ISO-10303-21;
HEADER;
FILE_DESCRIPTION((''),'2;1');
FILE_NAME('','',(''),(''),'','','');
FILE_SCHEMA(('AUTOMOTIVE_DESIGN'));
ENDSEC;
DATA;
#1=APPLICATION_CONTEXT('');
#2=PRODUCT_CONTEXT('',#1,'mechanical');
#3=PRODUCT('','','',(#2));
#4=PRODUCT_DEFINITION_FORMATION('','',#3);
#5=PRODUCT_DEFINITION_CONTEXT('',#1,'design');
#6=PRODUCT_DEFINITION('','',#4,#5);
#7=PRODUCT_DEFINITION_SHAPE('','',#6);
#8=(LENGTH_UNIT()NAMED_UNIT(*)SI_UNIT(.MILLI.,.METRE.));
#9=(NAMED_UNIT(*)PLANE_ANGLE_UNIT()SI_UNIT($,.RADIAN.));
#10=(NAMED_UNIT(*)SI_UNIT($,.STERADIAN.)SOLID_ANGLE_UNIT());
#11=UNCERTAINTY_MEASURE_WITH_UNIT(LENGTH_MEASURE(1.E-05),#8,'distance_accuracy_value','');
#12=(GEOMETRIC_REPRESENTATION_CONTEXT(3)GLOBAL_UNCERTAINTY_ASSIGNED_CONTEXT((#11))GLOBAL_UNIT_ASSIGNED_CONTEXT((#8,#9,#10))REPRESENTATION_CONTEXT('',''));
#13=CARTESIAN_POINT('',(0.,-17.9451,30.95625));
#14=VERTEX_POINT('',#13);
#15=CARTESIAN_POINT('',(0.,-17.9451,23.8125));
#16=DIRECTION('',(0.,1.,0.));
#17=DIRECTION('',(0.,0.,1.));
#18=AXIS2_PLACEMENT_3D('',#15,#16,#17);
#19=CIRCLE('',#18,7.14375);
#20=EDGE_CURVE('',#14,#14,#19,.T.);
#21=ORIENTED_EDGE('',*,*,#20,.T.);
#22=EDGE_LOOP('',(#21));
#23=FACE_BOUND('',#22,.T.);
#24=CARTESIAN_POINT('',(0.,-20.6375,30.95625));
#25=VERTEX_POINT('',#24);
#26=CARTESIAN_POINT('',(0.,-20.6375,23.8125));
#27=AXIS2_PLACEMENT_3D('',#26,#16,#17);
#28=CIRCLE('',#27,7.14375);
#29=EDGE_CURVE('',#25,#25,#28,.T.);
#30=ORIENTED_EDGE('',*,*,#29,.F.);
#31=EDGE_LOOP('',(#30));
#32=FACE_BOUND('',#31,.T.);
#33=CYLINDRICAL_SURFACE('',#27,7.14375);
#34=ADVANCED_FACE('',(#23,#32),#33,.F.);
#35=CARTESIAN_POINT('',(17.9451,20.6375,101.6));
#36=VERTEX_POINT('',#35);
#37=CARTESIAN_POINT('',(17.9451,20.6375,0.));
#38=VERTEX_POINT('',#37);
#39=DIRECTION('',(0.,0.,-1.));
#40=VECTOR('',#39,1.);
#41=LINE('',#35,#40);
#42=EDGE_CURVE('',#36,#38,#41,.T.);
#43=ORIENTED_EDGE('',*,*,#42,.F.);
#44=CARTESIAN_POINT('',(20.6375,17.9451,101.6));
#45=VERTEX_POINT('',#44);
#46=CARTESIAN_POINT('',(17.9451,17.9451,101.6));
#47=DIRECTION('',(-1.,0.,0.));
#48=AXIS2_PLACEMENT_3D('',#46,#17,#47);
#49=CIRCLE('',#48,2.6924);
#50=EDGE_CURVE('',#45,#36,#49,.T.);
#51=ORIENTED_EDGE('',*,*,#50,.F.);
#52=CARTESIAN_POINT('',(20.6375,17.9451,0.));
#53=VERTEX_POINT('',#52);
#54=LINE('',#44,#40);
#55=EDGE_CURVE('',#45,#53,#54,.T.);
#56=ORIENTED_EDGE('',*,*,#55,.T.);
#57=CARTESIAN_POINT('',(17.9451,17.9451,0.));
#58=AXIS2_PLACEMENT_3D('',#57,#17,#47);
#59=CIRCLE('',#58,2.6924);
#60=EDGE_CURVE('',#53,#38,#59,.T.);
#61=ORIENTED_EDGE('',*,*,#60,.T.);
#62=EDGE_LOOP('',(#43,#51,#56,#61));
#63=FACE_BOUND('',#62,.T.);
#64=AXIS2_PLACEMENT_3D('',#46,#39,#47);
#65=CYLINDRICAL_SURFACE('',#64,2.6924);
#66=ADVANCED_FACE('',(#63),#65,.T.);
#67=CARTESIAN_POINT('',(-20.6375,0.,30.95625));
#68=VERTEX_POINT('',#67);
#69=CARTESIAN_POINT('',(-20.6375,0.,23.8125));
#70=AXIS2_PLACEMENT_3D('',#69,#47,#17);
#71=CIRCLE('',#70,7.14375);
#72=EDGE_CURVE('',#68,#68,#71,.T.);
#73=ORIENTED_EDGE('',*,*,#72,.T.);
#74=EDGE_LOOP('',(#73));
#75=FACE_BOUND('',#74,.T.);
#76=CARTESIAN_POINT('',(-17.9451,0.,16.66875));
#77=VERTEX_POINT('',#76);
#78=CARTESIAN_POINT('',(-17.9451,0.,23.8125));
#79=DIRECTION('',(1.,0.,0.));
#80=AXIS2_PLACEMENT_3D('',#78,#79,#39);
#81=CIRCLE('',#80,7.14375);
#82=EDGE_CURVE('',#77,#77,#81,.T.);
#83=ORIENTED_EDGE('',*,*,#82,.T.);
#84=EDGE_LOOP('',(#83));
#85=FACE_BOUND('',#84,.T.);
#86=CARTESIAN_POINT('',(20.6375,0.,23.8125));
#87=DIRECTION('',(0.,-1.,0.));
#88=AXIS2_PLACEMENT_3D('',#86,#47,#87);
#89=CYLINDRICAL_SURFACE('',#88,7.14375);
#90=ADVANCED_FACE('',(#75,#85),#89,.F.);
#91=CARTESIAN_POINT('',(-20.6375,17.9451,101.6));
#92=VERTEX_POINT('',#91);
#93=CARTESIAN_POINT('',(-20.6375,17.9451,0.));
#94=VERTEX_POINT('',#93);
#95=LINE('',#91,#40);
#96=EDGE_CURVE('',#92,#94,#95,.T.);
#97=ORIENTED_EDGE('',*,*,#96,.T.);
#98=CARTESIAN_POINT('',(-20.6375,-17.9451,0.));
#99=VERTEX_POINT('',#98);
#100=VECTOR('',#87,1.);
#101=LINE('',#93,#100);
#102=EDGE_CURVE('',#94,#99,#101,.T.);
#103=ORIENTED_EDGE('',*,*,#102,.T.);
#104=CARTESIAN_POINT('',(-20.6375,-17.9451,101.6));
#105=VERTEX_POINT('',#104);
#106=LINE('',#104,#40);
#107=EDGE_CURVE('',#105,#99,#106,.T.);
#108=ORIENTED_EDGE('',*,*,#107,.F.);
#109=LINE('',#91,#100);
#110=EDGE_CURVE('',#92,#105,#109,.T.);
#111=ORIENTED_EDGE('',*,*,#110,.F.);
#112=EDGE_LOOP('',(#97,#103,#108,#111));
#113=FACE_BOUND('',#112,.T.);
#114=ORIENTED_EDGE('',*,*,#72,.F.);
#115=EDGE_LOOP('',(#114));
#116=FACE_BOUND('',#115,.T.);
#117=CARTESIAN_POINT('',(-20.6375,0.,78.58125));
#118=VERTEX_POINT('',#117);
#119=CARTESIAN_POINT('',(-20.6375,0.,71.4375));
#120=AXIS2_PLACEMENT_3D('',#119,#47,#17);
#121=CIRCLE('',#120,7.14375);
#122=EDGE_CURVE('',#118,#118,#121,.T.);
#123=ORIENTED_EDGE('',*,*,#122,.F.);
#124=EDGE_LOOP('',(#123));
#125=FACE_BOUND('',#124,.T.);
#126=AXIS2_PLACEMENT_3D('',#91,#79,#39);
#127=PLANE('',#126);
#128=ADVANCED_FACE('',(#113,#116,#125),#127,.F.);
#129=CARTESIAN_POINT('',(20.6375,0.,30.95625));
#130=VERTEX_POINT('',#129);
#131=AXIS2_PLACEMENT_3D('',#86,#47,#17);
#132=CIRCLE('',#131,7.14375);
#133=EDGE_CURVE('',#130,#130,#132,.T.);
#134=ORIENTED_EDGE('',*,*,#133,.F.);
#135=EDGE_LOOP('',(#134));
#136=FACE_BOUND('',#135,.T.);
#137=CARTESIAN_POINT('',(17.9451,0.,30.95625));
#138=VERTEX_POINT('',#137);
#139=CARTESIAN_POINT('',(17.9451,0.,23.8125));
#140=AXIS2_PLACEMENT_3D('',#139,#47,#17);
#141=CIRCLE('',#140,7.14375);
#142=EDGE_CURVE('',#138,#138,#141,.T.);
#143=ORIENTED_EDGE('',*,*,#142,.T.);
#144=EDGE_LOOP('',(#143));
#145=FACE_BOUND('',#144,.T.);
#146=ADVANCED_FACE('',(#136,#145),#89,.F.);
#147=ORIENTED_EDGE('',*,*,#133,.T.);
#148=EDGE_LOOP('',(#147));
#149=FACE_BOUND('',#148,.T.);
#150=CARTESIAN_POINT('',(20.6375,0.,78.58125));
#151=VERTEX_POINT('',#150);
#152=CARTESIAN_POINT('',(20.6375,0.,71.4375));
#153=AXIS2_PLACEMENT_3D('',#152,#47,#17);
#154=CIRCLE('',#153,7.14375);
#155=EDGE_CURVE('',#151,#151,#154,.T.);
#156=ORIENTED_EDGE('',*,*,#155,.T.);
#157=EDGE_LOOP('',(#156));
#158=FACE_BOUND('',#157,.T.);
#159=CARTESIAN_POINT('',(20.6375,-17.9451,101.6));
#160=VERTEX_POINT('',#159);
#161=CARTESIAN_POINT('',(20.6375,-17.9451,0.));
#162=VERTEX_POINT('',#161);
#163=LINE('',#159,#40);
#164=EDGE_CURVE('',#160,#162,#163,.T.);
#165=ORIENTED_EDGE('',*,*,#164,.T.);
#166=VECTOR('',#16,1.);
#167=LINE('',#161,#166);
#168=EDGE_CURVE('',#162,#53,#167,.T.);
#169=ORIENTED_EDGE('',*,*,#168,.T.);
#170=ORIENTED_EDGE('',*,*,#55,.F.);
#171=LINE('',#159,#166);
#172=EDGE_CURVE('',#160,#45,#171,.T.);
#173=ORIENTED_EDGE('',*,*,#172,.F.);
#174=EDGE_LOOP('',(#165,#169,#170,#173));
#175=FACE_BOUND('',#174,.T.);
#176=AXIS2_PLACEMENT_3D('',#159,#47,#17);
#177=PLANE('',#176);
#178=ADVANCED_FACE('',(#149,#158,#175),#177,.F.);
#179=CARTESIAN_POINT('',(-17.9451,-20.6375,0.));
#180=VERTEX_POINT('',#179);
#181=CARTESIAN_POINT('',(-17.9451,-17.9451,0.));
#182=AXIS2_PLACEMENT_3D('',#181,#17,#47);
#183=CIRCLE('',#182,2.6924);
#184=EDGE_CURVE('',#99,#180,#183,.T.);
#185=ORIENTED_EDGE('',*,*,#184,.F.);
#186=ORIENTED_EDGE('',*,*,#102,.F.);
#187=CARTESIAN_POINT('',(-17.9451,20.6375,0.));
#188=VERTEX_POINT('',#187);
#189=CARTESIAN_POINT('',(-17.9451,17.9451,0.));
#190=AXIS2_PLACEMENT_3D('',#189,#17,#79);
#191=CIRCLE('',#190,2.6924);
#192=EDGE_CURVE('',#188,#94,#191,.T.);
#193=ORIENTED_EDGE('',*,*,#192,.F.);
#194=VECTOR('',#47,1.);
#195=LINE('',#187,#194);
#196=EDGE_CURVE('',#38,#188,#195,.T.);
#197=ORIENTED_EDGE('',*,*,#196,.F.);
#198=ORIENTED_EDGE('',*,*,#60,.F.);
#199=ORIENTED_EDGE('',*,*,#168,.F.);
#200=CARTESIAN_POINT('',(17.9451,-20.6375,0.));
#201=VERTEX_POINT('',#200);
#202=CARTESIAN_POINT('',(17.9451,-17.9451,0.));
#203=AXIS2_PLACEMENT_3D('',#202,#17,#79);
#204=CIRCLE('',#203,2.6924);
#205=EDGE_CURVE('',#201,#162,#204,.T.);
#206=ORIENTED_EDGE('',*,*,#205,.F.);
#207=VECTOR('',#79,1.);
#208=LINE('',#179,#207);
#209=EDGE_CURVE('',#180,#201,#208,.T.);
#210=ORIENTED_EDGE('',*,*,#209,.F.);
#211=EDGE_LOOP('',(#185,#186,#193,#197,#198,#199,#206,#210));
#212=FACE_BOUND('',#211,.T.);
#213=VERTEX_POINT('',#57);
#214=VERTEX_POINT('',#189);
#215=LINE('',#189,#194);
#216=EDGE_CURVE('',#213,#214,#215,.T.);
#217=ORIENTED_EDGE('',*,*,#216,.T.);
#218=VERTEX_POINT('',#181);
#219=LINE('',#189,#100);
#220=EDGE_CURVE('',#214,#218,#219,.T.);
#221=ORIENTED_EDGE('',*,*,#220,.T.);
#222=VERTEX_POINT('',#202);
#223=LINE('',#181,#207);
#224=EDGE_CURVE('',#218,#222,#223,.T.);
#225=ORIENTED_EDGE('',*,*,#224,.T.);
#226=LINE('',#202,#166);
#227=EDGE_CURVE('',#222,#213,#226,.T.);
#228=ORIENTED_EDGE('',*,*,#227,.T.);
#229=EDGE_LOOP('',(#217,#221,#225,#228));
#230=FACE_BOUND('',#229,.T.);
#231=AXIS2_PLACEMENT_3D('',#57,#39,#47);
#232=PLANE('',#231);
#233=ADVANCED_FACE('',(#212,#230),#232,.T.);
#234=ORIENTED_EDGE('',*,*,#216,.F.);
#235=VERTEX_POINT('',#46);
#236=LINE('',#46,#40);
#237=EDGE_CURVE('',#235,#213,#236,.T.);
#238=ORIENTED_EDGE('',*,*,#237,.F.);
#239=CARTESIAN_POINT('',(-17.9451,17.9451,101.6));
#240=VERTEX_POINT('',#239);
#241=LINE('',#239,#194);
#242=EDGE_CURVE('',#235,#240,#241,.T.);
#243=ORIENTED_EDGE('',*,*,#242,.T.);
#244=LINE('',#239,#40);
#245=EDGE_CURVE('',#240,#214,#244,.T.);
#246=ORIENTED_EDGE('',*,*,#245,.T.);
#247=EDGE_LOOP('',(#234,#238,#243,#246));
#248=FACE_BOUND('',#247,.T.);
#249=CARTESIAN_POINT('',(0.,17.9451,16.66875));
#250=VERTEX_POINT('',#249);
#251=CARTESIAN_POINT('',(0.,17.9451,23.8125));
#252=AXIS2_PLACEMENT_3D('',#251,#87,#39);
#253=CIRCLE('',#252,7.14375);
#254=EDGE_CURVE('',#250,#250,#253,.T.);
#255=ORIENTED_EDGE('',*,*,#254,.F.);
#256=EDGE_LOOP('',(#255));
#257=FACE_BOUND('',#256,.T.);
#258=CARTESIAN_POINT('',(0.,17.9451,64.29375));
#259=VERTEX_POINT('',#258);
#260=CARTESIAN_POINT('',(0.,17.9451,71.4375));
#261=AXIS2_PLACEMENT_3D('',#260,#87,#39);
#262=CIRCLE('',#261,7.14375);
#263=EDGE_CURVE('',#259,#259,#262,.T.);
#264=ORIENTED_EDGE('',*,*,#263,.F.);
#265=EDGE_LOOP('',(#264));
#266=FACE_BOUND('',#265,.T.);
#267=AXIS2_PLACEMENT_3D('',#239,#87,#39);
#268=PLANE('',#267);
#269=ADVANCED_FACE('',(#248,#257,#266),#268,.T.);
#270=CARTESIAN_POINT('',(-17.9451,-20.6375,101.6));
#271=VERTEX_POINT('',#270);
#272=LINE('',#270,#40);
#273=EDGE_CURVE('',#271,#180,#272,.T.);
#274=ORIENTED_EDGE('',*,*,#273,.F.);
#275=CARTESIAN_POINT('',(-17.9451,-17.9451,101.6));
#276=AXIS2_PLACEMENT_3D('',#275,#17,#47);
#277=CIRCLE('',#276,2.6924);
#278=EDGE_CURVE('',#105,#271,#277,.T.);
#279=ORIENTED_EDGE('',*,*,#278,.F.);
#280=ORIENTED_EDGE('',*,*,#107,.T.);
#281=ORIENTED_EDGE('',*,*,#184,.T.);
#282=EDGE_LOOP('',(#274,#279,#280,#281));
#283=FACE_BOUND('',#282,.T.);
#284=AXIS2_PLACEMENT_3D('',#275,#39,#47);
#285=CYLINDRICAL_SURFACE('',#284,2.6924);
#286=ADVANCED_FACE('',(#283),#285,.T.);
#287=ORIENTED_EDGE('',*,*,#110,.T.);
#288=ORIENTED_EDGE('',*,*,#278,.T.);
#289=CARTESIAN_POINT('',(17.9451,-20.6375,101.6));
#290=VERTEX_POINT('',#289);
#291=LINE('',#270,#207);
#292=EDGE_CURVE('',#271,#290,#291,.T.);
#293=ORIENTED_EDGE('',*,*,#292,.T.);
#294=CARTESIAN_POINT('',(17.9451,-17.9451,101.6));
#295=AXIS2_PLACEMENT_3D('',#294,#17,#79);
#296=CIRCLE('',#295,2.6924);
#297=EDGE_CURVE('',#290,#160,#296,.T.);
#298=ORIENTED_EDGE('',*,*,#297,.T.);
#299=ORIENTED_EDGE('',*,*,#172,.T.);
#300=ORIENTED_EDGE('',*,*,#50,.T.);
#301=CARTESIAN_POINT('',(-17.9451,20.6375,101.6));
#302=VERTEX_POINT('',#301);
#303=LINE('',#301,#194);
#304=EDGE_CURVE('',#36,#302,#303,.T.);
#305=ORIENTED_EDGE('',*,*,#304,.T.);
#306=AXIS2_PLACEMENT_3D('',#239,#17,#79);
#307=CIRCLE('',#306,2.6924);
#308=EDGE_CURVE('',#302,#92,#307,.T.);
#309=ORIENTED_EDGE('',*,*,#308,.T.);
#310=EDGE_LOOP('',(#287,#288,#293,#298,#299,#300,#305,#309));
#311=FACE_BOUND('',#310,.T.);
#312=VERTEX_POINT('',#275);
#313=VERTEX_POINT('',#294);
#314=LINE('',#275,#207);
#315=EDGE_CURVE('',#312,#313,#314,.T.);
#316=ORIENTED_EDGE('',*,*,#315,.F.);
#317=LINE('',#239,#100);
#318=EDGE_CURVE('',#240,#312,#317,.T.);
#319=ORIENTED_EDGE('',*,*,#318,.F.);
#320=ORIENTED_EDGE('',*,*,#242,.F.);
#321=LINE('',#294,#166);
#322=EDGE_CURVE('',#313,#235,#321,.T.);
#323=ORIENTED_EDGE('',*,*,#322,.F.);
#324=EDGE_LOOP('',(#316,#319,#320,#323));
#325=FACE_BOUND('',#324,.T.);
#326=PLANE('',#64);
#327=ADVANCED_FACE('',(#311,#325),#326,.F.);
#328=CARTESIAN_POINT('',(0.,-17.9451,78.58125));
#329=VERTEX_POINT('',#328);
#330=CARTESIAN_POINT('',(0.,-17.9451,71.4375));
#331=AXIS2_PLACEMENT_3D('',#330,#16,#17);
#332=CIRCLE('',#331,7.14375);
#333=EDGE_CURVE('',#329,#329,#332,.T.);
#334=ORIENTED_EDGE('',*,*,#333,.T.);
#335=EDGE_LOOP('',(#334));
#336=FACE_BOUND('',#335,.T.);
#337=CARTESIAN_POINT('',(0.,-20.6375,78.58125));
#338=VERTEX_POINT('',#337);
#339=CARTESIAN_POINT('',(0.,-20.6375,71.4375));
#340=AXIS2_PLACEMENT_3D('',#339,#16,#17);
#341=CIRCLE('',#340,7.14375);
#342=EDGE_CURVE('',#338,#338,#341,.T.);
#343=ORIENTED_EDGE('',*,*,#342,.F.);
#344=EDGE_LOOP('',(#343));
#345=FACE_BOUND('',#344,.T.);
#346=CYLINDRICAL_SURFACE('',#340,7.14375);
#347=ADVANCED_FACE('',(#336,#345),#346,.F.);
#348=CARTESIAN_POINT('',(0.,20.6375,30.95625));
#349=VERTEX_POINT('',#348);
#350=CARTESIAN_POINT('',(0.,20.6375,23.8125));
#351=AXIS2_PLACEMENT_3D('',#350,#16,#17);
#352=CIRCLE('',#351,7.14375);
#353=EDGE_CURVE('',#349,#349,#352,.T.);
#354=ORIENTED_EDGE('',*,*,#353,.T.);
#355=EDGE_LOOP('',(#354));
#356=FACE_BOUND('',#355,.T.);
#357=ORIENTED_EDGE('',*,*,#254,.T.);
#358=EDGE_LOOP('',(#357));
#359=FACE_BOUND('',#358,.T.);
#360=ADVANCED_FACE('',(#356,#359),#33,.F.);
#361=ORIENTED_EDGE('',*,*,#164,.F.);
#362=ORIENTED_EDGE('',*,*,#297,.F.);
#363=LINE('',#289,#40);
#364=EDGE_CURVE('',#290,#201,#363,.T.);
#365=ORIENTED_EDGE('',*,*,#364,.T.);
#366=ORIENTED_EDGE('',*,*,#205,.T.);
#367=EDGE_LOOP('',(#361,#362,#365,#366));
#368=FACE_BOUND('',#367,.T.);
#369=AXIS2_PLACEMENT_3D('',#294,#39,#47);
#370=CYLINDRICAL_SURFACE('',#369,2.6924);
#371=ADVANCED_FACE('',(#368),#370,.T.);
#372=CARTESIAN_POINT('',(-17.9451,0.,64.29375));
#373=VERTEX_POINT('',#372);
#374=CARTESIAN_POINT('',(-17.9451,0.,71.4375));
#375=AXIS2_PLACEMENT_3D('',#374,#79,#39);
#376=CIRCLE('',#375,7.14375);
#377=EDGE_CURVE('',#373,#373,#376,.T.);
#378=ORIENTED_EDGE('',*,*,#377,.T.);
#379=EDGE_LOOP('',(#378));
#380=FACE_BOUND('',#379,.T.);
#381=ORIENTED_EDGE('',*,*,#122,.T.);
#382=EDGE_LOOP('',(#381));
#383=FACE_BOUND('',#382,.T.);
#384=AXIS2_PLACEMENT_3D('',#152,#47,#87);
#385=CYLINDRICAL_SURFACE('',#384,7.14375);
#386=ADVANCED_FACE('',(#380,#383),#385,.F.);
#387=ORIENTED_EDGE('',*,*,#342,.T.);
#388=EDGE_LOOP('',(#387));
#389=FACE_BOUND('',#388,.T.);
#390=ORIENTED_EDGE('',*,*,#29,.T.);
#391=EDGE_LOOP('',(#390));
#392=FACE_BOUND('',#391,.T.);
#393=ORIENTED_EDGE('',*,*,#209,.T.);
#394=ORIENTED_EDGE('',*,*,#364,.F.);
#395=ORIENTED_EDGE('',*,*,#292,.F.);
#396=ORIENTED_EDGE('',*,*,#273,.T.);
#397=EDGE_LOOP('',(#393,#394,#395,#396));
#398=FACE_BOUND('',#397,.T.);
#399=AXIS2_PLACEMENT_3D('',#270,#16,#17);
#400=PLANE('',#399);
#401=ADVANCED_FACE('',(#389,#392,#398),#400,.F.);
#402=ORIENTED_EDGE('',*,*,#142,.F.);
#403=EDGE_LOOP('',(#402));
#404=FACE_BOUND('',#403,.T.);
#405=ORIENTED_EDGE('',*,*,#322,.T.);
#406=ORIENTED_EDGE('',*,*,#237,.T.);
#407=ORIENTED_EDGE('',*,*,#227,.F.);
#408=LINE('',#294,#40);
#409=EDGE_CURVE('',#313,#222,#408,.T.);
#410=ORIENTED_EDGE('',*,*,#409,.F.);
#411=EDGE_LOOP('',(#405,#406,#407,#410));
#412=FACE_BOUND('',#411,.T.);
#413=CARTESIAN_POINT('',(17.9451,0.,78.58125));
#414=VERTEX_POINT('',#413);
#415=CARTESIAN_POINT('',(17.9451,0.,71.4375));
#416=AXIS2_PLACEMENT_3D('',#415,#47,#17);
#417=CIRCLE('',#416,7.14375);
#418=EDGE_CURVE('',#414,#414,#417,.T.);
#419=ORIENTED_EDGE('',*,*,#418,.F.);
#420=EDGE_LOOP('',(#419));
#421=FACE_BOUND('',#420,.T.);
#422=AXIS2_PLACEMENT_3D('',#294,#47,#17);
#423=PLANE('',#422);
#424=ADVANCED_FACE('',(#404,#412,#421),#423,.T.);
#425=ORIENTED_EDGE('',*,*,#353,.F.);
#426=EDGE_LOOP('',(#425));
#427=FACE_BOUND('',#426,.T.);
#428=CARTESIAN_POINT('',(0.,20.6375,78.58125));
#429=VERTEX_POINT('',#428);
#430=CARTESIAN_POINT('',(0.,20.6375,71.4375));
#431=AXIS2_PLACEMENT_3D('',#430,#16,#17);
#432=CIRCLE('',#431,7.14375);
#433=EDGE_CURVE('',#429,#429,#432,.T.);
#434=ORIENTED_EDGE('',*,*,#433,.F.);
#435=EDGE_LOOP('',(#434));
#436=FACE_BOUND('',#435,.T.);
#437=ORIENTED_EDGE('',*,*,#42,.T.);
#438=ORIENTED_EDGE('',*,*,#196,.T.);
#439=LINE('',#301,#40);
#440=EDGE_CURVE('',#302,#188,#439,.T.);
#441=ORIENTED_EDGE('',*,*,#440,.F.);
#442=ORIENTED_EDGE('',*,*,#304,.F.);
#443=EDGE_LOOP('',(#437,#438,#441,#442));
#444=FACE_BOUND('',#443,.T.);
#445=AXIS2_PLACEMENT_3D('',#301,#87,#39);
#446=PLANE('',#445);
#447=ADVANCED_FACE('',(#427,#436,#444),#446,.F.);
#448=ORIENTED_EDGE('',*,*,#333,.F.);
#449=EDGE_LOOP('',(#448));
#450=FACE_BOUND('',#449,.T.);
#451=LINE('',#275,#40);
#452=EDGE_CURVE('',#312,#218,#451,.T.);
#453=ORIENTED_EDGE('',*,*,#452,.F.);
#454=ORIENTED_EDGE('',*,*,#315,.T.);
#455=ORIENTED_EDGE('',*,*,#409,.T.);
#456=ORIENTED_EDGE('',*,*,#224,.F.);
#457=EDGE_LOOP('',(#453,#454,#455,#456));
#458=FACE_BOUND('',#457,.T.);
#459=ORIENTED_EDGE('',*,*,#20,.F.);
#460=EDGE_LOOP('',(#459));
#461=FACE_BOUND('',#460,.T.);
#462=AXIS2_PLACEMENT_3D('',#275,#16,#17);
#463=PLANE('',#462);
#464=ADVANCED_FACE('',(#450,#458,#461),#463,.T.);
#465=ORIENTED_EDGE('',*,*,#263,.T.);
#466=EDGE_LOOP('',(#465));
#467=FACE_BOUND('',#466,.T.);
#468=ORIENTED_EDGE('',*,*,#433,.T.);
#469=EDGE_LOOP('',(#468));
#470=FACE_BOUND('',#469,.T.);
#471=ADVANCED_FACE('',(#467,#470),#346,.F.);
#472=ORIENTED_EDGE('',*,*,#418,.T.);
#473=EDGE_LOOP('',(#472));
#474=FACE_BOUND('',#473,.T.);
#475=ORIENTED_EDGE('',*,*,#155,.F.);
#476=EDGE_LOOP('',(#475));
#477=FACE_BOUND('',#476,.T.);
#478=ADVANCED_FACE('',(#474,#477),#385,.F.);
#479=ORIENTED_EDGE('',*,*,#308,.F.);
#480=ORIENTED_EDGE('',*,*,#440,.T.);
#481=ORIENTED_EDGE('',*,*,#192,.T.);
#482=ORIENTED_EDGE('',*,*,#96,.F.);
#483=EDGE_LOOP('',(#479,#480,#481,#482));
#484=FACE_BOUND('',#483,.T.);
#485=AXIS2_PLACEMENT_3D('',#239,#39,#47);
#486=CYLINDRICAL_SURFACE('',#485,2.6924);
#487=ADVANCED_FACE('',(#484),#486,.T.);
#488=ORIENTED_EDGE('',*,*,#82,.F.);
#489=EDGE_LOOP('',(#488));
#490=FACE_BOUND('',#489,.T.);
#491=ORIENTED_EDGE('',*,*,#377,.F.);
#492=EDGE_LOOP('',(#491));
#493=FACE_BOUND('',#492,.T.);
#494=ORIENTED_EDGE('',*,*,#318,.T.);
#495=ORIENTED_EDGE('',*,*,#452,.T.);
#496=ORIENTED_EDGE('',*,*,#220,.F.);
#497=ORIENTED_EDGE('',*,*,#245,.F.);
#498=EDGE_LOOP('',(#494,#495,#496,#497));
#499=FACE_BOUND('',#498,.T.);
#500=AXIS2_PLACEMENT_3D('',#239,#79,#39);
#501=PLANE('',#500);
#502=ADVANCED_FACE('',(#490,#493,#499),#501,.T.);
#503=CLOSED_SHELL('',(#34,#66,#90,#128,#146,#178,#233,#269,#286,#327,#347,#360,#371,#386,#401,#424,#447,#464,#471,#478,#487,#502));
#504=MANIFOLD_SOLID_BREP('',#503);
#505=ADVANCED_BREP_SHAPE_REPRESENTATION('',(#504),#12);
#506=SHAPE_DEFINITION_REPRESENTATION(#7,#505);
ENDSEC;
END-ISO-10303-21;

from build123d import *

# Parameters (mm, degrees)
SKETCH1_W                 = 35.8902
SKETCH1_H                 = 35.8902
BASE_EXTRUDE_DEPTH        = 101.6
HOLE1_START               = -20.6375
HOLE1_OUTLINE_R           = 7.14375
HOLE1_DEPTH               = 41.275
CIRPATTERN2_COUNT         = 2
CIRPATTERN2_ANGLE         = 90
LPATTERN1_COUNT           = 2
LPATTERN1_PITCH           = 47.625
LPATTERN1_START           = -20.6375
LPATTERN1_COPY_1_SKETCH_R = 7.14375
LPATTERN1_COPY_1_DEPTH    = 41.275


# Read off the part's stored shape, not the designer's step: Hole1
with BuildPart() as part:
    # Sketch1 → Base-Extrude (new body)
    with BuildSketch(Plane.XY):
        with BuildLine():
            Line((-20.6375, 17.9451), (-20.6375, -17.9451))
            ThreePointArc((-20.6375, -17.9451), (-19.848914298, -19.848914298), (-17.9451, -20.6375))
            Line((-17.9451, -20.6375), (17.9451, -20.6375))
            ThreePointArc((17.9451, -20.6375), (19.848914298, -19.848914298), (20.6375, -17.9451))
            Line((20.6375, -17.9451), (20.6375, 17.9451))
            ThreePointArc((20.6375, 17.9451), (19.848914298, 19.848914298), (17.9451, 20.6375))
            Line((17.9451, 20.6375), (-17.9451, 20.6375))
            ThreePointArc((-17.9451, 20.6375), (-19.848914298, 19.848914298), (-20.6375, 17.9451))
        make_face()
        Rectangle(SKETCH1_W, SKETCH1_H, mode=Mode.SUBTRACT)
    extrude(amount=BASE_EXTRUDE_DEPTH)

    # Hole1 outline → Hole1 (cut)
    with BuildSketch(Plane(origin=(0, 0, 0), x_dir=(1, 0, 0), z_dir=(0, 1, 0)).offset(HOLE1_START)):
        with Locations((0, -23.8125)):
            Circle(HOLE1_OUTLINE_R)
    hole1 = extrude(amount=HOLE1_DEPTH, mode=Mode.SUBTRACT)

    # CirPattern2: Hole1 ×2 about axis
    cirpattern2_axis = Axis((0, 0, -50), (0, 0, 1))
    for i in range(1, CIRPATTERN2_COUNT):
        add(hole1.rotate(cirpattern2_axis, i * CIRPATTERN2_ANGLE / (CIRPATTERN2_COUNT - 1)), mode=Mode.SUBTRACT)

    # LPattern1: Hole1 ×2
    with Locations(*[(0, 0, i * LPATTERN1_PITCH) for i in range(1, LPATTERN1_COUNT)]):
        add(hole1, mode=Mode.SUBTRACT)

    # LPattern1 copy 1 sketch → LPattern1 copy 1 (cut)
    with BuildSketch(Plane(origin=(0, 0, 47.625), x_dir=(0, 1, 0), z_dir=(-1, 0, 0)).offset(LPATTERN1_START)):
        with Locations((0, -23.8125)):
            Circle(LPATTERN1_COPY_1_SKETCH_R)
    extrude(amount=LPATTERN1_COPY_1_DEPTH, mode=Mode.SUBTRACT)


solid = part.part
